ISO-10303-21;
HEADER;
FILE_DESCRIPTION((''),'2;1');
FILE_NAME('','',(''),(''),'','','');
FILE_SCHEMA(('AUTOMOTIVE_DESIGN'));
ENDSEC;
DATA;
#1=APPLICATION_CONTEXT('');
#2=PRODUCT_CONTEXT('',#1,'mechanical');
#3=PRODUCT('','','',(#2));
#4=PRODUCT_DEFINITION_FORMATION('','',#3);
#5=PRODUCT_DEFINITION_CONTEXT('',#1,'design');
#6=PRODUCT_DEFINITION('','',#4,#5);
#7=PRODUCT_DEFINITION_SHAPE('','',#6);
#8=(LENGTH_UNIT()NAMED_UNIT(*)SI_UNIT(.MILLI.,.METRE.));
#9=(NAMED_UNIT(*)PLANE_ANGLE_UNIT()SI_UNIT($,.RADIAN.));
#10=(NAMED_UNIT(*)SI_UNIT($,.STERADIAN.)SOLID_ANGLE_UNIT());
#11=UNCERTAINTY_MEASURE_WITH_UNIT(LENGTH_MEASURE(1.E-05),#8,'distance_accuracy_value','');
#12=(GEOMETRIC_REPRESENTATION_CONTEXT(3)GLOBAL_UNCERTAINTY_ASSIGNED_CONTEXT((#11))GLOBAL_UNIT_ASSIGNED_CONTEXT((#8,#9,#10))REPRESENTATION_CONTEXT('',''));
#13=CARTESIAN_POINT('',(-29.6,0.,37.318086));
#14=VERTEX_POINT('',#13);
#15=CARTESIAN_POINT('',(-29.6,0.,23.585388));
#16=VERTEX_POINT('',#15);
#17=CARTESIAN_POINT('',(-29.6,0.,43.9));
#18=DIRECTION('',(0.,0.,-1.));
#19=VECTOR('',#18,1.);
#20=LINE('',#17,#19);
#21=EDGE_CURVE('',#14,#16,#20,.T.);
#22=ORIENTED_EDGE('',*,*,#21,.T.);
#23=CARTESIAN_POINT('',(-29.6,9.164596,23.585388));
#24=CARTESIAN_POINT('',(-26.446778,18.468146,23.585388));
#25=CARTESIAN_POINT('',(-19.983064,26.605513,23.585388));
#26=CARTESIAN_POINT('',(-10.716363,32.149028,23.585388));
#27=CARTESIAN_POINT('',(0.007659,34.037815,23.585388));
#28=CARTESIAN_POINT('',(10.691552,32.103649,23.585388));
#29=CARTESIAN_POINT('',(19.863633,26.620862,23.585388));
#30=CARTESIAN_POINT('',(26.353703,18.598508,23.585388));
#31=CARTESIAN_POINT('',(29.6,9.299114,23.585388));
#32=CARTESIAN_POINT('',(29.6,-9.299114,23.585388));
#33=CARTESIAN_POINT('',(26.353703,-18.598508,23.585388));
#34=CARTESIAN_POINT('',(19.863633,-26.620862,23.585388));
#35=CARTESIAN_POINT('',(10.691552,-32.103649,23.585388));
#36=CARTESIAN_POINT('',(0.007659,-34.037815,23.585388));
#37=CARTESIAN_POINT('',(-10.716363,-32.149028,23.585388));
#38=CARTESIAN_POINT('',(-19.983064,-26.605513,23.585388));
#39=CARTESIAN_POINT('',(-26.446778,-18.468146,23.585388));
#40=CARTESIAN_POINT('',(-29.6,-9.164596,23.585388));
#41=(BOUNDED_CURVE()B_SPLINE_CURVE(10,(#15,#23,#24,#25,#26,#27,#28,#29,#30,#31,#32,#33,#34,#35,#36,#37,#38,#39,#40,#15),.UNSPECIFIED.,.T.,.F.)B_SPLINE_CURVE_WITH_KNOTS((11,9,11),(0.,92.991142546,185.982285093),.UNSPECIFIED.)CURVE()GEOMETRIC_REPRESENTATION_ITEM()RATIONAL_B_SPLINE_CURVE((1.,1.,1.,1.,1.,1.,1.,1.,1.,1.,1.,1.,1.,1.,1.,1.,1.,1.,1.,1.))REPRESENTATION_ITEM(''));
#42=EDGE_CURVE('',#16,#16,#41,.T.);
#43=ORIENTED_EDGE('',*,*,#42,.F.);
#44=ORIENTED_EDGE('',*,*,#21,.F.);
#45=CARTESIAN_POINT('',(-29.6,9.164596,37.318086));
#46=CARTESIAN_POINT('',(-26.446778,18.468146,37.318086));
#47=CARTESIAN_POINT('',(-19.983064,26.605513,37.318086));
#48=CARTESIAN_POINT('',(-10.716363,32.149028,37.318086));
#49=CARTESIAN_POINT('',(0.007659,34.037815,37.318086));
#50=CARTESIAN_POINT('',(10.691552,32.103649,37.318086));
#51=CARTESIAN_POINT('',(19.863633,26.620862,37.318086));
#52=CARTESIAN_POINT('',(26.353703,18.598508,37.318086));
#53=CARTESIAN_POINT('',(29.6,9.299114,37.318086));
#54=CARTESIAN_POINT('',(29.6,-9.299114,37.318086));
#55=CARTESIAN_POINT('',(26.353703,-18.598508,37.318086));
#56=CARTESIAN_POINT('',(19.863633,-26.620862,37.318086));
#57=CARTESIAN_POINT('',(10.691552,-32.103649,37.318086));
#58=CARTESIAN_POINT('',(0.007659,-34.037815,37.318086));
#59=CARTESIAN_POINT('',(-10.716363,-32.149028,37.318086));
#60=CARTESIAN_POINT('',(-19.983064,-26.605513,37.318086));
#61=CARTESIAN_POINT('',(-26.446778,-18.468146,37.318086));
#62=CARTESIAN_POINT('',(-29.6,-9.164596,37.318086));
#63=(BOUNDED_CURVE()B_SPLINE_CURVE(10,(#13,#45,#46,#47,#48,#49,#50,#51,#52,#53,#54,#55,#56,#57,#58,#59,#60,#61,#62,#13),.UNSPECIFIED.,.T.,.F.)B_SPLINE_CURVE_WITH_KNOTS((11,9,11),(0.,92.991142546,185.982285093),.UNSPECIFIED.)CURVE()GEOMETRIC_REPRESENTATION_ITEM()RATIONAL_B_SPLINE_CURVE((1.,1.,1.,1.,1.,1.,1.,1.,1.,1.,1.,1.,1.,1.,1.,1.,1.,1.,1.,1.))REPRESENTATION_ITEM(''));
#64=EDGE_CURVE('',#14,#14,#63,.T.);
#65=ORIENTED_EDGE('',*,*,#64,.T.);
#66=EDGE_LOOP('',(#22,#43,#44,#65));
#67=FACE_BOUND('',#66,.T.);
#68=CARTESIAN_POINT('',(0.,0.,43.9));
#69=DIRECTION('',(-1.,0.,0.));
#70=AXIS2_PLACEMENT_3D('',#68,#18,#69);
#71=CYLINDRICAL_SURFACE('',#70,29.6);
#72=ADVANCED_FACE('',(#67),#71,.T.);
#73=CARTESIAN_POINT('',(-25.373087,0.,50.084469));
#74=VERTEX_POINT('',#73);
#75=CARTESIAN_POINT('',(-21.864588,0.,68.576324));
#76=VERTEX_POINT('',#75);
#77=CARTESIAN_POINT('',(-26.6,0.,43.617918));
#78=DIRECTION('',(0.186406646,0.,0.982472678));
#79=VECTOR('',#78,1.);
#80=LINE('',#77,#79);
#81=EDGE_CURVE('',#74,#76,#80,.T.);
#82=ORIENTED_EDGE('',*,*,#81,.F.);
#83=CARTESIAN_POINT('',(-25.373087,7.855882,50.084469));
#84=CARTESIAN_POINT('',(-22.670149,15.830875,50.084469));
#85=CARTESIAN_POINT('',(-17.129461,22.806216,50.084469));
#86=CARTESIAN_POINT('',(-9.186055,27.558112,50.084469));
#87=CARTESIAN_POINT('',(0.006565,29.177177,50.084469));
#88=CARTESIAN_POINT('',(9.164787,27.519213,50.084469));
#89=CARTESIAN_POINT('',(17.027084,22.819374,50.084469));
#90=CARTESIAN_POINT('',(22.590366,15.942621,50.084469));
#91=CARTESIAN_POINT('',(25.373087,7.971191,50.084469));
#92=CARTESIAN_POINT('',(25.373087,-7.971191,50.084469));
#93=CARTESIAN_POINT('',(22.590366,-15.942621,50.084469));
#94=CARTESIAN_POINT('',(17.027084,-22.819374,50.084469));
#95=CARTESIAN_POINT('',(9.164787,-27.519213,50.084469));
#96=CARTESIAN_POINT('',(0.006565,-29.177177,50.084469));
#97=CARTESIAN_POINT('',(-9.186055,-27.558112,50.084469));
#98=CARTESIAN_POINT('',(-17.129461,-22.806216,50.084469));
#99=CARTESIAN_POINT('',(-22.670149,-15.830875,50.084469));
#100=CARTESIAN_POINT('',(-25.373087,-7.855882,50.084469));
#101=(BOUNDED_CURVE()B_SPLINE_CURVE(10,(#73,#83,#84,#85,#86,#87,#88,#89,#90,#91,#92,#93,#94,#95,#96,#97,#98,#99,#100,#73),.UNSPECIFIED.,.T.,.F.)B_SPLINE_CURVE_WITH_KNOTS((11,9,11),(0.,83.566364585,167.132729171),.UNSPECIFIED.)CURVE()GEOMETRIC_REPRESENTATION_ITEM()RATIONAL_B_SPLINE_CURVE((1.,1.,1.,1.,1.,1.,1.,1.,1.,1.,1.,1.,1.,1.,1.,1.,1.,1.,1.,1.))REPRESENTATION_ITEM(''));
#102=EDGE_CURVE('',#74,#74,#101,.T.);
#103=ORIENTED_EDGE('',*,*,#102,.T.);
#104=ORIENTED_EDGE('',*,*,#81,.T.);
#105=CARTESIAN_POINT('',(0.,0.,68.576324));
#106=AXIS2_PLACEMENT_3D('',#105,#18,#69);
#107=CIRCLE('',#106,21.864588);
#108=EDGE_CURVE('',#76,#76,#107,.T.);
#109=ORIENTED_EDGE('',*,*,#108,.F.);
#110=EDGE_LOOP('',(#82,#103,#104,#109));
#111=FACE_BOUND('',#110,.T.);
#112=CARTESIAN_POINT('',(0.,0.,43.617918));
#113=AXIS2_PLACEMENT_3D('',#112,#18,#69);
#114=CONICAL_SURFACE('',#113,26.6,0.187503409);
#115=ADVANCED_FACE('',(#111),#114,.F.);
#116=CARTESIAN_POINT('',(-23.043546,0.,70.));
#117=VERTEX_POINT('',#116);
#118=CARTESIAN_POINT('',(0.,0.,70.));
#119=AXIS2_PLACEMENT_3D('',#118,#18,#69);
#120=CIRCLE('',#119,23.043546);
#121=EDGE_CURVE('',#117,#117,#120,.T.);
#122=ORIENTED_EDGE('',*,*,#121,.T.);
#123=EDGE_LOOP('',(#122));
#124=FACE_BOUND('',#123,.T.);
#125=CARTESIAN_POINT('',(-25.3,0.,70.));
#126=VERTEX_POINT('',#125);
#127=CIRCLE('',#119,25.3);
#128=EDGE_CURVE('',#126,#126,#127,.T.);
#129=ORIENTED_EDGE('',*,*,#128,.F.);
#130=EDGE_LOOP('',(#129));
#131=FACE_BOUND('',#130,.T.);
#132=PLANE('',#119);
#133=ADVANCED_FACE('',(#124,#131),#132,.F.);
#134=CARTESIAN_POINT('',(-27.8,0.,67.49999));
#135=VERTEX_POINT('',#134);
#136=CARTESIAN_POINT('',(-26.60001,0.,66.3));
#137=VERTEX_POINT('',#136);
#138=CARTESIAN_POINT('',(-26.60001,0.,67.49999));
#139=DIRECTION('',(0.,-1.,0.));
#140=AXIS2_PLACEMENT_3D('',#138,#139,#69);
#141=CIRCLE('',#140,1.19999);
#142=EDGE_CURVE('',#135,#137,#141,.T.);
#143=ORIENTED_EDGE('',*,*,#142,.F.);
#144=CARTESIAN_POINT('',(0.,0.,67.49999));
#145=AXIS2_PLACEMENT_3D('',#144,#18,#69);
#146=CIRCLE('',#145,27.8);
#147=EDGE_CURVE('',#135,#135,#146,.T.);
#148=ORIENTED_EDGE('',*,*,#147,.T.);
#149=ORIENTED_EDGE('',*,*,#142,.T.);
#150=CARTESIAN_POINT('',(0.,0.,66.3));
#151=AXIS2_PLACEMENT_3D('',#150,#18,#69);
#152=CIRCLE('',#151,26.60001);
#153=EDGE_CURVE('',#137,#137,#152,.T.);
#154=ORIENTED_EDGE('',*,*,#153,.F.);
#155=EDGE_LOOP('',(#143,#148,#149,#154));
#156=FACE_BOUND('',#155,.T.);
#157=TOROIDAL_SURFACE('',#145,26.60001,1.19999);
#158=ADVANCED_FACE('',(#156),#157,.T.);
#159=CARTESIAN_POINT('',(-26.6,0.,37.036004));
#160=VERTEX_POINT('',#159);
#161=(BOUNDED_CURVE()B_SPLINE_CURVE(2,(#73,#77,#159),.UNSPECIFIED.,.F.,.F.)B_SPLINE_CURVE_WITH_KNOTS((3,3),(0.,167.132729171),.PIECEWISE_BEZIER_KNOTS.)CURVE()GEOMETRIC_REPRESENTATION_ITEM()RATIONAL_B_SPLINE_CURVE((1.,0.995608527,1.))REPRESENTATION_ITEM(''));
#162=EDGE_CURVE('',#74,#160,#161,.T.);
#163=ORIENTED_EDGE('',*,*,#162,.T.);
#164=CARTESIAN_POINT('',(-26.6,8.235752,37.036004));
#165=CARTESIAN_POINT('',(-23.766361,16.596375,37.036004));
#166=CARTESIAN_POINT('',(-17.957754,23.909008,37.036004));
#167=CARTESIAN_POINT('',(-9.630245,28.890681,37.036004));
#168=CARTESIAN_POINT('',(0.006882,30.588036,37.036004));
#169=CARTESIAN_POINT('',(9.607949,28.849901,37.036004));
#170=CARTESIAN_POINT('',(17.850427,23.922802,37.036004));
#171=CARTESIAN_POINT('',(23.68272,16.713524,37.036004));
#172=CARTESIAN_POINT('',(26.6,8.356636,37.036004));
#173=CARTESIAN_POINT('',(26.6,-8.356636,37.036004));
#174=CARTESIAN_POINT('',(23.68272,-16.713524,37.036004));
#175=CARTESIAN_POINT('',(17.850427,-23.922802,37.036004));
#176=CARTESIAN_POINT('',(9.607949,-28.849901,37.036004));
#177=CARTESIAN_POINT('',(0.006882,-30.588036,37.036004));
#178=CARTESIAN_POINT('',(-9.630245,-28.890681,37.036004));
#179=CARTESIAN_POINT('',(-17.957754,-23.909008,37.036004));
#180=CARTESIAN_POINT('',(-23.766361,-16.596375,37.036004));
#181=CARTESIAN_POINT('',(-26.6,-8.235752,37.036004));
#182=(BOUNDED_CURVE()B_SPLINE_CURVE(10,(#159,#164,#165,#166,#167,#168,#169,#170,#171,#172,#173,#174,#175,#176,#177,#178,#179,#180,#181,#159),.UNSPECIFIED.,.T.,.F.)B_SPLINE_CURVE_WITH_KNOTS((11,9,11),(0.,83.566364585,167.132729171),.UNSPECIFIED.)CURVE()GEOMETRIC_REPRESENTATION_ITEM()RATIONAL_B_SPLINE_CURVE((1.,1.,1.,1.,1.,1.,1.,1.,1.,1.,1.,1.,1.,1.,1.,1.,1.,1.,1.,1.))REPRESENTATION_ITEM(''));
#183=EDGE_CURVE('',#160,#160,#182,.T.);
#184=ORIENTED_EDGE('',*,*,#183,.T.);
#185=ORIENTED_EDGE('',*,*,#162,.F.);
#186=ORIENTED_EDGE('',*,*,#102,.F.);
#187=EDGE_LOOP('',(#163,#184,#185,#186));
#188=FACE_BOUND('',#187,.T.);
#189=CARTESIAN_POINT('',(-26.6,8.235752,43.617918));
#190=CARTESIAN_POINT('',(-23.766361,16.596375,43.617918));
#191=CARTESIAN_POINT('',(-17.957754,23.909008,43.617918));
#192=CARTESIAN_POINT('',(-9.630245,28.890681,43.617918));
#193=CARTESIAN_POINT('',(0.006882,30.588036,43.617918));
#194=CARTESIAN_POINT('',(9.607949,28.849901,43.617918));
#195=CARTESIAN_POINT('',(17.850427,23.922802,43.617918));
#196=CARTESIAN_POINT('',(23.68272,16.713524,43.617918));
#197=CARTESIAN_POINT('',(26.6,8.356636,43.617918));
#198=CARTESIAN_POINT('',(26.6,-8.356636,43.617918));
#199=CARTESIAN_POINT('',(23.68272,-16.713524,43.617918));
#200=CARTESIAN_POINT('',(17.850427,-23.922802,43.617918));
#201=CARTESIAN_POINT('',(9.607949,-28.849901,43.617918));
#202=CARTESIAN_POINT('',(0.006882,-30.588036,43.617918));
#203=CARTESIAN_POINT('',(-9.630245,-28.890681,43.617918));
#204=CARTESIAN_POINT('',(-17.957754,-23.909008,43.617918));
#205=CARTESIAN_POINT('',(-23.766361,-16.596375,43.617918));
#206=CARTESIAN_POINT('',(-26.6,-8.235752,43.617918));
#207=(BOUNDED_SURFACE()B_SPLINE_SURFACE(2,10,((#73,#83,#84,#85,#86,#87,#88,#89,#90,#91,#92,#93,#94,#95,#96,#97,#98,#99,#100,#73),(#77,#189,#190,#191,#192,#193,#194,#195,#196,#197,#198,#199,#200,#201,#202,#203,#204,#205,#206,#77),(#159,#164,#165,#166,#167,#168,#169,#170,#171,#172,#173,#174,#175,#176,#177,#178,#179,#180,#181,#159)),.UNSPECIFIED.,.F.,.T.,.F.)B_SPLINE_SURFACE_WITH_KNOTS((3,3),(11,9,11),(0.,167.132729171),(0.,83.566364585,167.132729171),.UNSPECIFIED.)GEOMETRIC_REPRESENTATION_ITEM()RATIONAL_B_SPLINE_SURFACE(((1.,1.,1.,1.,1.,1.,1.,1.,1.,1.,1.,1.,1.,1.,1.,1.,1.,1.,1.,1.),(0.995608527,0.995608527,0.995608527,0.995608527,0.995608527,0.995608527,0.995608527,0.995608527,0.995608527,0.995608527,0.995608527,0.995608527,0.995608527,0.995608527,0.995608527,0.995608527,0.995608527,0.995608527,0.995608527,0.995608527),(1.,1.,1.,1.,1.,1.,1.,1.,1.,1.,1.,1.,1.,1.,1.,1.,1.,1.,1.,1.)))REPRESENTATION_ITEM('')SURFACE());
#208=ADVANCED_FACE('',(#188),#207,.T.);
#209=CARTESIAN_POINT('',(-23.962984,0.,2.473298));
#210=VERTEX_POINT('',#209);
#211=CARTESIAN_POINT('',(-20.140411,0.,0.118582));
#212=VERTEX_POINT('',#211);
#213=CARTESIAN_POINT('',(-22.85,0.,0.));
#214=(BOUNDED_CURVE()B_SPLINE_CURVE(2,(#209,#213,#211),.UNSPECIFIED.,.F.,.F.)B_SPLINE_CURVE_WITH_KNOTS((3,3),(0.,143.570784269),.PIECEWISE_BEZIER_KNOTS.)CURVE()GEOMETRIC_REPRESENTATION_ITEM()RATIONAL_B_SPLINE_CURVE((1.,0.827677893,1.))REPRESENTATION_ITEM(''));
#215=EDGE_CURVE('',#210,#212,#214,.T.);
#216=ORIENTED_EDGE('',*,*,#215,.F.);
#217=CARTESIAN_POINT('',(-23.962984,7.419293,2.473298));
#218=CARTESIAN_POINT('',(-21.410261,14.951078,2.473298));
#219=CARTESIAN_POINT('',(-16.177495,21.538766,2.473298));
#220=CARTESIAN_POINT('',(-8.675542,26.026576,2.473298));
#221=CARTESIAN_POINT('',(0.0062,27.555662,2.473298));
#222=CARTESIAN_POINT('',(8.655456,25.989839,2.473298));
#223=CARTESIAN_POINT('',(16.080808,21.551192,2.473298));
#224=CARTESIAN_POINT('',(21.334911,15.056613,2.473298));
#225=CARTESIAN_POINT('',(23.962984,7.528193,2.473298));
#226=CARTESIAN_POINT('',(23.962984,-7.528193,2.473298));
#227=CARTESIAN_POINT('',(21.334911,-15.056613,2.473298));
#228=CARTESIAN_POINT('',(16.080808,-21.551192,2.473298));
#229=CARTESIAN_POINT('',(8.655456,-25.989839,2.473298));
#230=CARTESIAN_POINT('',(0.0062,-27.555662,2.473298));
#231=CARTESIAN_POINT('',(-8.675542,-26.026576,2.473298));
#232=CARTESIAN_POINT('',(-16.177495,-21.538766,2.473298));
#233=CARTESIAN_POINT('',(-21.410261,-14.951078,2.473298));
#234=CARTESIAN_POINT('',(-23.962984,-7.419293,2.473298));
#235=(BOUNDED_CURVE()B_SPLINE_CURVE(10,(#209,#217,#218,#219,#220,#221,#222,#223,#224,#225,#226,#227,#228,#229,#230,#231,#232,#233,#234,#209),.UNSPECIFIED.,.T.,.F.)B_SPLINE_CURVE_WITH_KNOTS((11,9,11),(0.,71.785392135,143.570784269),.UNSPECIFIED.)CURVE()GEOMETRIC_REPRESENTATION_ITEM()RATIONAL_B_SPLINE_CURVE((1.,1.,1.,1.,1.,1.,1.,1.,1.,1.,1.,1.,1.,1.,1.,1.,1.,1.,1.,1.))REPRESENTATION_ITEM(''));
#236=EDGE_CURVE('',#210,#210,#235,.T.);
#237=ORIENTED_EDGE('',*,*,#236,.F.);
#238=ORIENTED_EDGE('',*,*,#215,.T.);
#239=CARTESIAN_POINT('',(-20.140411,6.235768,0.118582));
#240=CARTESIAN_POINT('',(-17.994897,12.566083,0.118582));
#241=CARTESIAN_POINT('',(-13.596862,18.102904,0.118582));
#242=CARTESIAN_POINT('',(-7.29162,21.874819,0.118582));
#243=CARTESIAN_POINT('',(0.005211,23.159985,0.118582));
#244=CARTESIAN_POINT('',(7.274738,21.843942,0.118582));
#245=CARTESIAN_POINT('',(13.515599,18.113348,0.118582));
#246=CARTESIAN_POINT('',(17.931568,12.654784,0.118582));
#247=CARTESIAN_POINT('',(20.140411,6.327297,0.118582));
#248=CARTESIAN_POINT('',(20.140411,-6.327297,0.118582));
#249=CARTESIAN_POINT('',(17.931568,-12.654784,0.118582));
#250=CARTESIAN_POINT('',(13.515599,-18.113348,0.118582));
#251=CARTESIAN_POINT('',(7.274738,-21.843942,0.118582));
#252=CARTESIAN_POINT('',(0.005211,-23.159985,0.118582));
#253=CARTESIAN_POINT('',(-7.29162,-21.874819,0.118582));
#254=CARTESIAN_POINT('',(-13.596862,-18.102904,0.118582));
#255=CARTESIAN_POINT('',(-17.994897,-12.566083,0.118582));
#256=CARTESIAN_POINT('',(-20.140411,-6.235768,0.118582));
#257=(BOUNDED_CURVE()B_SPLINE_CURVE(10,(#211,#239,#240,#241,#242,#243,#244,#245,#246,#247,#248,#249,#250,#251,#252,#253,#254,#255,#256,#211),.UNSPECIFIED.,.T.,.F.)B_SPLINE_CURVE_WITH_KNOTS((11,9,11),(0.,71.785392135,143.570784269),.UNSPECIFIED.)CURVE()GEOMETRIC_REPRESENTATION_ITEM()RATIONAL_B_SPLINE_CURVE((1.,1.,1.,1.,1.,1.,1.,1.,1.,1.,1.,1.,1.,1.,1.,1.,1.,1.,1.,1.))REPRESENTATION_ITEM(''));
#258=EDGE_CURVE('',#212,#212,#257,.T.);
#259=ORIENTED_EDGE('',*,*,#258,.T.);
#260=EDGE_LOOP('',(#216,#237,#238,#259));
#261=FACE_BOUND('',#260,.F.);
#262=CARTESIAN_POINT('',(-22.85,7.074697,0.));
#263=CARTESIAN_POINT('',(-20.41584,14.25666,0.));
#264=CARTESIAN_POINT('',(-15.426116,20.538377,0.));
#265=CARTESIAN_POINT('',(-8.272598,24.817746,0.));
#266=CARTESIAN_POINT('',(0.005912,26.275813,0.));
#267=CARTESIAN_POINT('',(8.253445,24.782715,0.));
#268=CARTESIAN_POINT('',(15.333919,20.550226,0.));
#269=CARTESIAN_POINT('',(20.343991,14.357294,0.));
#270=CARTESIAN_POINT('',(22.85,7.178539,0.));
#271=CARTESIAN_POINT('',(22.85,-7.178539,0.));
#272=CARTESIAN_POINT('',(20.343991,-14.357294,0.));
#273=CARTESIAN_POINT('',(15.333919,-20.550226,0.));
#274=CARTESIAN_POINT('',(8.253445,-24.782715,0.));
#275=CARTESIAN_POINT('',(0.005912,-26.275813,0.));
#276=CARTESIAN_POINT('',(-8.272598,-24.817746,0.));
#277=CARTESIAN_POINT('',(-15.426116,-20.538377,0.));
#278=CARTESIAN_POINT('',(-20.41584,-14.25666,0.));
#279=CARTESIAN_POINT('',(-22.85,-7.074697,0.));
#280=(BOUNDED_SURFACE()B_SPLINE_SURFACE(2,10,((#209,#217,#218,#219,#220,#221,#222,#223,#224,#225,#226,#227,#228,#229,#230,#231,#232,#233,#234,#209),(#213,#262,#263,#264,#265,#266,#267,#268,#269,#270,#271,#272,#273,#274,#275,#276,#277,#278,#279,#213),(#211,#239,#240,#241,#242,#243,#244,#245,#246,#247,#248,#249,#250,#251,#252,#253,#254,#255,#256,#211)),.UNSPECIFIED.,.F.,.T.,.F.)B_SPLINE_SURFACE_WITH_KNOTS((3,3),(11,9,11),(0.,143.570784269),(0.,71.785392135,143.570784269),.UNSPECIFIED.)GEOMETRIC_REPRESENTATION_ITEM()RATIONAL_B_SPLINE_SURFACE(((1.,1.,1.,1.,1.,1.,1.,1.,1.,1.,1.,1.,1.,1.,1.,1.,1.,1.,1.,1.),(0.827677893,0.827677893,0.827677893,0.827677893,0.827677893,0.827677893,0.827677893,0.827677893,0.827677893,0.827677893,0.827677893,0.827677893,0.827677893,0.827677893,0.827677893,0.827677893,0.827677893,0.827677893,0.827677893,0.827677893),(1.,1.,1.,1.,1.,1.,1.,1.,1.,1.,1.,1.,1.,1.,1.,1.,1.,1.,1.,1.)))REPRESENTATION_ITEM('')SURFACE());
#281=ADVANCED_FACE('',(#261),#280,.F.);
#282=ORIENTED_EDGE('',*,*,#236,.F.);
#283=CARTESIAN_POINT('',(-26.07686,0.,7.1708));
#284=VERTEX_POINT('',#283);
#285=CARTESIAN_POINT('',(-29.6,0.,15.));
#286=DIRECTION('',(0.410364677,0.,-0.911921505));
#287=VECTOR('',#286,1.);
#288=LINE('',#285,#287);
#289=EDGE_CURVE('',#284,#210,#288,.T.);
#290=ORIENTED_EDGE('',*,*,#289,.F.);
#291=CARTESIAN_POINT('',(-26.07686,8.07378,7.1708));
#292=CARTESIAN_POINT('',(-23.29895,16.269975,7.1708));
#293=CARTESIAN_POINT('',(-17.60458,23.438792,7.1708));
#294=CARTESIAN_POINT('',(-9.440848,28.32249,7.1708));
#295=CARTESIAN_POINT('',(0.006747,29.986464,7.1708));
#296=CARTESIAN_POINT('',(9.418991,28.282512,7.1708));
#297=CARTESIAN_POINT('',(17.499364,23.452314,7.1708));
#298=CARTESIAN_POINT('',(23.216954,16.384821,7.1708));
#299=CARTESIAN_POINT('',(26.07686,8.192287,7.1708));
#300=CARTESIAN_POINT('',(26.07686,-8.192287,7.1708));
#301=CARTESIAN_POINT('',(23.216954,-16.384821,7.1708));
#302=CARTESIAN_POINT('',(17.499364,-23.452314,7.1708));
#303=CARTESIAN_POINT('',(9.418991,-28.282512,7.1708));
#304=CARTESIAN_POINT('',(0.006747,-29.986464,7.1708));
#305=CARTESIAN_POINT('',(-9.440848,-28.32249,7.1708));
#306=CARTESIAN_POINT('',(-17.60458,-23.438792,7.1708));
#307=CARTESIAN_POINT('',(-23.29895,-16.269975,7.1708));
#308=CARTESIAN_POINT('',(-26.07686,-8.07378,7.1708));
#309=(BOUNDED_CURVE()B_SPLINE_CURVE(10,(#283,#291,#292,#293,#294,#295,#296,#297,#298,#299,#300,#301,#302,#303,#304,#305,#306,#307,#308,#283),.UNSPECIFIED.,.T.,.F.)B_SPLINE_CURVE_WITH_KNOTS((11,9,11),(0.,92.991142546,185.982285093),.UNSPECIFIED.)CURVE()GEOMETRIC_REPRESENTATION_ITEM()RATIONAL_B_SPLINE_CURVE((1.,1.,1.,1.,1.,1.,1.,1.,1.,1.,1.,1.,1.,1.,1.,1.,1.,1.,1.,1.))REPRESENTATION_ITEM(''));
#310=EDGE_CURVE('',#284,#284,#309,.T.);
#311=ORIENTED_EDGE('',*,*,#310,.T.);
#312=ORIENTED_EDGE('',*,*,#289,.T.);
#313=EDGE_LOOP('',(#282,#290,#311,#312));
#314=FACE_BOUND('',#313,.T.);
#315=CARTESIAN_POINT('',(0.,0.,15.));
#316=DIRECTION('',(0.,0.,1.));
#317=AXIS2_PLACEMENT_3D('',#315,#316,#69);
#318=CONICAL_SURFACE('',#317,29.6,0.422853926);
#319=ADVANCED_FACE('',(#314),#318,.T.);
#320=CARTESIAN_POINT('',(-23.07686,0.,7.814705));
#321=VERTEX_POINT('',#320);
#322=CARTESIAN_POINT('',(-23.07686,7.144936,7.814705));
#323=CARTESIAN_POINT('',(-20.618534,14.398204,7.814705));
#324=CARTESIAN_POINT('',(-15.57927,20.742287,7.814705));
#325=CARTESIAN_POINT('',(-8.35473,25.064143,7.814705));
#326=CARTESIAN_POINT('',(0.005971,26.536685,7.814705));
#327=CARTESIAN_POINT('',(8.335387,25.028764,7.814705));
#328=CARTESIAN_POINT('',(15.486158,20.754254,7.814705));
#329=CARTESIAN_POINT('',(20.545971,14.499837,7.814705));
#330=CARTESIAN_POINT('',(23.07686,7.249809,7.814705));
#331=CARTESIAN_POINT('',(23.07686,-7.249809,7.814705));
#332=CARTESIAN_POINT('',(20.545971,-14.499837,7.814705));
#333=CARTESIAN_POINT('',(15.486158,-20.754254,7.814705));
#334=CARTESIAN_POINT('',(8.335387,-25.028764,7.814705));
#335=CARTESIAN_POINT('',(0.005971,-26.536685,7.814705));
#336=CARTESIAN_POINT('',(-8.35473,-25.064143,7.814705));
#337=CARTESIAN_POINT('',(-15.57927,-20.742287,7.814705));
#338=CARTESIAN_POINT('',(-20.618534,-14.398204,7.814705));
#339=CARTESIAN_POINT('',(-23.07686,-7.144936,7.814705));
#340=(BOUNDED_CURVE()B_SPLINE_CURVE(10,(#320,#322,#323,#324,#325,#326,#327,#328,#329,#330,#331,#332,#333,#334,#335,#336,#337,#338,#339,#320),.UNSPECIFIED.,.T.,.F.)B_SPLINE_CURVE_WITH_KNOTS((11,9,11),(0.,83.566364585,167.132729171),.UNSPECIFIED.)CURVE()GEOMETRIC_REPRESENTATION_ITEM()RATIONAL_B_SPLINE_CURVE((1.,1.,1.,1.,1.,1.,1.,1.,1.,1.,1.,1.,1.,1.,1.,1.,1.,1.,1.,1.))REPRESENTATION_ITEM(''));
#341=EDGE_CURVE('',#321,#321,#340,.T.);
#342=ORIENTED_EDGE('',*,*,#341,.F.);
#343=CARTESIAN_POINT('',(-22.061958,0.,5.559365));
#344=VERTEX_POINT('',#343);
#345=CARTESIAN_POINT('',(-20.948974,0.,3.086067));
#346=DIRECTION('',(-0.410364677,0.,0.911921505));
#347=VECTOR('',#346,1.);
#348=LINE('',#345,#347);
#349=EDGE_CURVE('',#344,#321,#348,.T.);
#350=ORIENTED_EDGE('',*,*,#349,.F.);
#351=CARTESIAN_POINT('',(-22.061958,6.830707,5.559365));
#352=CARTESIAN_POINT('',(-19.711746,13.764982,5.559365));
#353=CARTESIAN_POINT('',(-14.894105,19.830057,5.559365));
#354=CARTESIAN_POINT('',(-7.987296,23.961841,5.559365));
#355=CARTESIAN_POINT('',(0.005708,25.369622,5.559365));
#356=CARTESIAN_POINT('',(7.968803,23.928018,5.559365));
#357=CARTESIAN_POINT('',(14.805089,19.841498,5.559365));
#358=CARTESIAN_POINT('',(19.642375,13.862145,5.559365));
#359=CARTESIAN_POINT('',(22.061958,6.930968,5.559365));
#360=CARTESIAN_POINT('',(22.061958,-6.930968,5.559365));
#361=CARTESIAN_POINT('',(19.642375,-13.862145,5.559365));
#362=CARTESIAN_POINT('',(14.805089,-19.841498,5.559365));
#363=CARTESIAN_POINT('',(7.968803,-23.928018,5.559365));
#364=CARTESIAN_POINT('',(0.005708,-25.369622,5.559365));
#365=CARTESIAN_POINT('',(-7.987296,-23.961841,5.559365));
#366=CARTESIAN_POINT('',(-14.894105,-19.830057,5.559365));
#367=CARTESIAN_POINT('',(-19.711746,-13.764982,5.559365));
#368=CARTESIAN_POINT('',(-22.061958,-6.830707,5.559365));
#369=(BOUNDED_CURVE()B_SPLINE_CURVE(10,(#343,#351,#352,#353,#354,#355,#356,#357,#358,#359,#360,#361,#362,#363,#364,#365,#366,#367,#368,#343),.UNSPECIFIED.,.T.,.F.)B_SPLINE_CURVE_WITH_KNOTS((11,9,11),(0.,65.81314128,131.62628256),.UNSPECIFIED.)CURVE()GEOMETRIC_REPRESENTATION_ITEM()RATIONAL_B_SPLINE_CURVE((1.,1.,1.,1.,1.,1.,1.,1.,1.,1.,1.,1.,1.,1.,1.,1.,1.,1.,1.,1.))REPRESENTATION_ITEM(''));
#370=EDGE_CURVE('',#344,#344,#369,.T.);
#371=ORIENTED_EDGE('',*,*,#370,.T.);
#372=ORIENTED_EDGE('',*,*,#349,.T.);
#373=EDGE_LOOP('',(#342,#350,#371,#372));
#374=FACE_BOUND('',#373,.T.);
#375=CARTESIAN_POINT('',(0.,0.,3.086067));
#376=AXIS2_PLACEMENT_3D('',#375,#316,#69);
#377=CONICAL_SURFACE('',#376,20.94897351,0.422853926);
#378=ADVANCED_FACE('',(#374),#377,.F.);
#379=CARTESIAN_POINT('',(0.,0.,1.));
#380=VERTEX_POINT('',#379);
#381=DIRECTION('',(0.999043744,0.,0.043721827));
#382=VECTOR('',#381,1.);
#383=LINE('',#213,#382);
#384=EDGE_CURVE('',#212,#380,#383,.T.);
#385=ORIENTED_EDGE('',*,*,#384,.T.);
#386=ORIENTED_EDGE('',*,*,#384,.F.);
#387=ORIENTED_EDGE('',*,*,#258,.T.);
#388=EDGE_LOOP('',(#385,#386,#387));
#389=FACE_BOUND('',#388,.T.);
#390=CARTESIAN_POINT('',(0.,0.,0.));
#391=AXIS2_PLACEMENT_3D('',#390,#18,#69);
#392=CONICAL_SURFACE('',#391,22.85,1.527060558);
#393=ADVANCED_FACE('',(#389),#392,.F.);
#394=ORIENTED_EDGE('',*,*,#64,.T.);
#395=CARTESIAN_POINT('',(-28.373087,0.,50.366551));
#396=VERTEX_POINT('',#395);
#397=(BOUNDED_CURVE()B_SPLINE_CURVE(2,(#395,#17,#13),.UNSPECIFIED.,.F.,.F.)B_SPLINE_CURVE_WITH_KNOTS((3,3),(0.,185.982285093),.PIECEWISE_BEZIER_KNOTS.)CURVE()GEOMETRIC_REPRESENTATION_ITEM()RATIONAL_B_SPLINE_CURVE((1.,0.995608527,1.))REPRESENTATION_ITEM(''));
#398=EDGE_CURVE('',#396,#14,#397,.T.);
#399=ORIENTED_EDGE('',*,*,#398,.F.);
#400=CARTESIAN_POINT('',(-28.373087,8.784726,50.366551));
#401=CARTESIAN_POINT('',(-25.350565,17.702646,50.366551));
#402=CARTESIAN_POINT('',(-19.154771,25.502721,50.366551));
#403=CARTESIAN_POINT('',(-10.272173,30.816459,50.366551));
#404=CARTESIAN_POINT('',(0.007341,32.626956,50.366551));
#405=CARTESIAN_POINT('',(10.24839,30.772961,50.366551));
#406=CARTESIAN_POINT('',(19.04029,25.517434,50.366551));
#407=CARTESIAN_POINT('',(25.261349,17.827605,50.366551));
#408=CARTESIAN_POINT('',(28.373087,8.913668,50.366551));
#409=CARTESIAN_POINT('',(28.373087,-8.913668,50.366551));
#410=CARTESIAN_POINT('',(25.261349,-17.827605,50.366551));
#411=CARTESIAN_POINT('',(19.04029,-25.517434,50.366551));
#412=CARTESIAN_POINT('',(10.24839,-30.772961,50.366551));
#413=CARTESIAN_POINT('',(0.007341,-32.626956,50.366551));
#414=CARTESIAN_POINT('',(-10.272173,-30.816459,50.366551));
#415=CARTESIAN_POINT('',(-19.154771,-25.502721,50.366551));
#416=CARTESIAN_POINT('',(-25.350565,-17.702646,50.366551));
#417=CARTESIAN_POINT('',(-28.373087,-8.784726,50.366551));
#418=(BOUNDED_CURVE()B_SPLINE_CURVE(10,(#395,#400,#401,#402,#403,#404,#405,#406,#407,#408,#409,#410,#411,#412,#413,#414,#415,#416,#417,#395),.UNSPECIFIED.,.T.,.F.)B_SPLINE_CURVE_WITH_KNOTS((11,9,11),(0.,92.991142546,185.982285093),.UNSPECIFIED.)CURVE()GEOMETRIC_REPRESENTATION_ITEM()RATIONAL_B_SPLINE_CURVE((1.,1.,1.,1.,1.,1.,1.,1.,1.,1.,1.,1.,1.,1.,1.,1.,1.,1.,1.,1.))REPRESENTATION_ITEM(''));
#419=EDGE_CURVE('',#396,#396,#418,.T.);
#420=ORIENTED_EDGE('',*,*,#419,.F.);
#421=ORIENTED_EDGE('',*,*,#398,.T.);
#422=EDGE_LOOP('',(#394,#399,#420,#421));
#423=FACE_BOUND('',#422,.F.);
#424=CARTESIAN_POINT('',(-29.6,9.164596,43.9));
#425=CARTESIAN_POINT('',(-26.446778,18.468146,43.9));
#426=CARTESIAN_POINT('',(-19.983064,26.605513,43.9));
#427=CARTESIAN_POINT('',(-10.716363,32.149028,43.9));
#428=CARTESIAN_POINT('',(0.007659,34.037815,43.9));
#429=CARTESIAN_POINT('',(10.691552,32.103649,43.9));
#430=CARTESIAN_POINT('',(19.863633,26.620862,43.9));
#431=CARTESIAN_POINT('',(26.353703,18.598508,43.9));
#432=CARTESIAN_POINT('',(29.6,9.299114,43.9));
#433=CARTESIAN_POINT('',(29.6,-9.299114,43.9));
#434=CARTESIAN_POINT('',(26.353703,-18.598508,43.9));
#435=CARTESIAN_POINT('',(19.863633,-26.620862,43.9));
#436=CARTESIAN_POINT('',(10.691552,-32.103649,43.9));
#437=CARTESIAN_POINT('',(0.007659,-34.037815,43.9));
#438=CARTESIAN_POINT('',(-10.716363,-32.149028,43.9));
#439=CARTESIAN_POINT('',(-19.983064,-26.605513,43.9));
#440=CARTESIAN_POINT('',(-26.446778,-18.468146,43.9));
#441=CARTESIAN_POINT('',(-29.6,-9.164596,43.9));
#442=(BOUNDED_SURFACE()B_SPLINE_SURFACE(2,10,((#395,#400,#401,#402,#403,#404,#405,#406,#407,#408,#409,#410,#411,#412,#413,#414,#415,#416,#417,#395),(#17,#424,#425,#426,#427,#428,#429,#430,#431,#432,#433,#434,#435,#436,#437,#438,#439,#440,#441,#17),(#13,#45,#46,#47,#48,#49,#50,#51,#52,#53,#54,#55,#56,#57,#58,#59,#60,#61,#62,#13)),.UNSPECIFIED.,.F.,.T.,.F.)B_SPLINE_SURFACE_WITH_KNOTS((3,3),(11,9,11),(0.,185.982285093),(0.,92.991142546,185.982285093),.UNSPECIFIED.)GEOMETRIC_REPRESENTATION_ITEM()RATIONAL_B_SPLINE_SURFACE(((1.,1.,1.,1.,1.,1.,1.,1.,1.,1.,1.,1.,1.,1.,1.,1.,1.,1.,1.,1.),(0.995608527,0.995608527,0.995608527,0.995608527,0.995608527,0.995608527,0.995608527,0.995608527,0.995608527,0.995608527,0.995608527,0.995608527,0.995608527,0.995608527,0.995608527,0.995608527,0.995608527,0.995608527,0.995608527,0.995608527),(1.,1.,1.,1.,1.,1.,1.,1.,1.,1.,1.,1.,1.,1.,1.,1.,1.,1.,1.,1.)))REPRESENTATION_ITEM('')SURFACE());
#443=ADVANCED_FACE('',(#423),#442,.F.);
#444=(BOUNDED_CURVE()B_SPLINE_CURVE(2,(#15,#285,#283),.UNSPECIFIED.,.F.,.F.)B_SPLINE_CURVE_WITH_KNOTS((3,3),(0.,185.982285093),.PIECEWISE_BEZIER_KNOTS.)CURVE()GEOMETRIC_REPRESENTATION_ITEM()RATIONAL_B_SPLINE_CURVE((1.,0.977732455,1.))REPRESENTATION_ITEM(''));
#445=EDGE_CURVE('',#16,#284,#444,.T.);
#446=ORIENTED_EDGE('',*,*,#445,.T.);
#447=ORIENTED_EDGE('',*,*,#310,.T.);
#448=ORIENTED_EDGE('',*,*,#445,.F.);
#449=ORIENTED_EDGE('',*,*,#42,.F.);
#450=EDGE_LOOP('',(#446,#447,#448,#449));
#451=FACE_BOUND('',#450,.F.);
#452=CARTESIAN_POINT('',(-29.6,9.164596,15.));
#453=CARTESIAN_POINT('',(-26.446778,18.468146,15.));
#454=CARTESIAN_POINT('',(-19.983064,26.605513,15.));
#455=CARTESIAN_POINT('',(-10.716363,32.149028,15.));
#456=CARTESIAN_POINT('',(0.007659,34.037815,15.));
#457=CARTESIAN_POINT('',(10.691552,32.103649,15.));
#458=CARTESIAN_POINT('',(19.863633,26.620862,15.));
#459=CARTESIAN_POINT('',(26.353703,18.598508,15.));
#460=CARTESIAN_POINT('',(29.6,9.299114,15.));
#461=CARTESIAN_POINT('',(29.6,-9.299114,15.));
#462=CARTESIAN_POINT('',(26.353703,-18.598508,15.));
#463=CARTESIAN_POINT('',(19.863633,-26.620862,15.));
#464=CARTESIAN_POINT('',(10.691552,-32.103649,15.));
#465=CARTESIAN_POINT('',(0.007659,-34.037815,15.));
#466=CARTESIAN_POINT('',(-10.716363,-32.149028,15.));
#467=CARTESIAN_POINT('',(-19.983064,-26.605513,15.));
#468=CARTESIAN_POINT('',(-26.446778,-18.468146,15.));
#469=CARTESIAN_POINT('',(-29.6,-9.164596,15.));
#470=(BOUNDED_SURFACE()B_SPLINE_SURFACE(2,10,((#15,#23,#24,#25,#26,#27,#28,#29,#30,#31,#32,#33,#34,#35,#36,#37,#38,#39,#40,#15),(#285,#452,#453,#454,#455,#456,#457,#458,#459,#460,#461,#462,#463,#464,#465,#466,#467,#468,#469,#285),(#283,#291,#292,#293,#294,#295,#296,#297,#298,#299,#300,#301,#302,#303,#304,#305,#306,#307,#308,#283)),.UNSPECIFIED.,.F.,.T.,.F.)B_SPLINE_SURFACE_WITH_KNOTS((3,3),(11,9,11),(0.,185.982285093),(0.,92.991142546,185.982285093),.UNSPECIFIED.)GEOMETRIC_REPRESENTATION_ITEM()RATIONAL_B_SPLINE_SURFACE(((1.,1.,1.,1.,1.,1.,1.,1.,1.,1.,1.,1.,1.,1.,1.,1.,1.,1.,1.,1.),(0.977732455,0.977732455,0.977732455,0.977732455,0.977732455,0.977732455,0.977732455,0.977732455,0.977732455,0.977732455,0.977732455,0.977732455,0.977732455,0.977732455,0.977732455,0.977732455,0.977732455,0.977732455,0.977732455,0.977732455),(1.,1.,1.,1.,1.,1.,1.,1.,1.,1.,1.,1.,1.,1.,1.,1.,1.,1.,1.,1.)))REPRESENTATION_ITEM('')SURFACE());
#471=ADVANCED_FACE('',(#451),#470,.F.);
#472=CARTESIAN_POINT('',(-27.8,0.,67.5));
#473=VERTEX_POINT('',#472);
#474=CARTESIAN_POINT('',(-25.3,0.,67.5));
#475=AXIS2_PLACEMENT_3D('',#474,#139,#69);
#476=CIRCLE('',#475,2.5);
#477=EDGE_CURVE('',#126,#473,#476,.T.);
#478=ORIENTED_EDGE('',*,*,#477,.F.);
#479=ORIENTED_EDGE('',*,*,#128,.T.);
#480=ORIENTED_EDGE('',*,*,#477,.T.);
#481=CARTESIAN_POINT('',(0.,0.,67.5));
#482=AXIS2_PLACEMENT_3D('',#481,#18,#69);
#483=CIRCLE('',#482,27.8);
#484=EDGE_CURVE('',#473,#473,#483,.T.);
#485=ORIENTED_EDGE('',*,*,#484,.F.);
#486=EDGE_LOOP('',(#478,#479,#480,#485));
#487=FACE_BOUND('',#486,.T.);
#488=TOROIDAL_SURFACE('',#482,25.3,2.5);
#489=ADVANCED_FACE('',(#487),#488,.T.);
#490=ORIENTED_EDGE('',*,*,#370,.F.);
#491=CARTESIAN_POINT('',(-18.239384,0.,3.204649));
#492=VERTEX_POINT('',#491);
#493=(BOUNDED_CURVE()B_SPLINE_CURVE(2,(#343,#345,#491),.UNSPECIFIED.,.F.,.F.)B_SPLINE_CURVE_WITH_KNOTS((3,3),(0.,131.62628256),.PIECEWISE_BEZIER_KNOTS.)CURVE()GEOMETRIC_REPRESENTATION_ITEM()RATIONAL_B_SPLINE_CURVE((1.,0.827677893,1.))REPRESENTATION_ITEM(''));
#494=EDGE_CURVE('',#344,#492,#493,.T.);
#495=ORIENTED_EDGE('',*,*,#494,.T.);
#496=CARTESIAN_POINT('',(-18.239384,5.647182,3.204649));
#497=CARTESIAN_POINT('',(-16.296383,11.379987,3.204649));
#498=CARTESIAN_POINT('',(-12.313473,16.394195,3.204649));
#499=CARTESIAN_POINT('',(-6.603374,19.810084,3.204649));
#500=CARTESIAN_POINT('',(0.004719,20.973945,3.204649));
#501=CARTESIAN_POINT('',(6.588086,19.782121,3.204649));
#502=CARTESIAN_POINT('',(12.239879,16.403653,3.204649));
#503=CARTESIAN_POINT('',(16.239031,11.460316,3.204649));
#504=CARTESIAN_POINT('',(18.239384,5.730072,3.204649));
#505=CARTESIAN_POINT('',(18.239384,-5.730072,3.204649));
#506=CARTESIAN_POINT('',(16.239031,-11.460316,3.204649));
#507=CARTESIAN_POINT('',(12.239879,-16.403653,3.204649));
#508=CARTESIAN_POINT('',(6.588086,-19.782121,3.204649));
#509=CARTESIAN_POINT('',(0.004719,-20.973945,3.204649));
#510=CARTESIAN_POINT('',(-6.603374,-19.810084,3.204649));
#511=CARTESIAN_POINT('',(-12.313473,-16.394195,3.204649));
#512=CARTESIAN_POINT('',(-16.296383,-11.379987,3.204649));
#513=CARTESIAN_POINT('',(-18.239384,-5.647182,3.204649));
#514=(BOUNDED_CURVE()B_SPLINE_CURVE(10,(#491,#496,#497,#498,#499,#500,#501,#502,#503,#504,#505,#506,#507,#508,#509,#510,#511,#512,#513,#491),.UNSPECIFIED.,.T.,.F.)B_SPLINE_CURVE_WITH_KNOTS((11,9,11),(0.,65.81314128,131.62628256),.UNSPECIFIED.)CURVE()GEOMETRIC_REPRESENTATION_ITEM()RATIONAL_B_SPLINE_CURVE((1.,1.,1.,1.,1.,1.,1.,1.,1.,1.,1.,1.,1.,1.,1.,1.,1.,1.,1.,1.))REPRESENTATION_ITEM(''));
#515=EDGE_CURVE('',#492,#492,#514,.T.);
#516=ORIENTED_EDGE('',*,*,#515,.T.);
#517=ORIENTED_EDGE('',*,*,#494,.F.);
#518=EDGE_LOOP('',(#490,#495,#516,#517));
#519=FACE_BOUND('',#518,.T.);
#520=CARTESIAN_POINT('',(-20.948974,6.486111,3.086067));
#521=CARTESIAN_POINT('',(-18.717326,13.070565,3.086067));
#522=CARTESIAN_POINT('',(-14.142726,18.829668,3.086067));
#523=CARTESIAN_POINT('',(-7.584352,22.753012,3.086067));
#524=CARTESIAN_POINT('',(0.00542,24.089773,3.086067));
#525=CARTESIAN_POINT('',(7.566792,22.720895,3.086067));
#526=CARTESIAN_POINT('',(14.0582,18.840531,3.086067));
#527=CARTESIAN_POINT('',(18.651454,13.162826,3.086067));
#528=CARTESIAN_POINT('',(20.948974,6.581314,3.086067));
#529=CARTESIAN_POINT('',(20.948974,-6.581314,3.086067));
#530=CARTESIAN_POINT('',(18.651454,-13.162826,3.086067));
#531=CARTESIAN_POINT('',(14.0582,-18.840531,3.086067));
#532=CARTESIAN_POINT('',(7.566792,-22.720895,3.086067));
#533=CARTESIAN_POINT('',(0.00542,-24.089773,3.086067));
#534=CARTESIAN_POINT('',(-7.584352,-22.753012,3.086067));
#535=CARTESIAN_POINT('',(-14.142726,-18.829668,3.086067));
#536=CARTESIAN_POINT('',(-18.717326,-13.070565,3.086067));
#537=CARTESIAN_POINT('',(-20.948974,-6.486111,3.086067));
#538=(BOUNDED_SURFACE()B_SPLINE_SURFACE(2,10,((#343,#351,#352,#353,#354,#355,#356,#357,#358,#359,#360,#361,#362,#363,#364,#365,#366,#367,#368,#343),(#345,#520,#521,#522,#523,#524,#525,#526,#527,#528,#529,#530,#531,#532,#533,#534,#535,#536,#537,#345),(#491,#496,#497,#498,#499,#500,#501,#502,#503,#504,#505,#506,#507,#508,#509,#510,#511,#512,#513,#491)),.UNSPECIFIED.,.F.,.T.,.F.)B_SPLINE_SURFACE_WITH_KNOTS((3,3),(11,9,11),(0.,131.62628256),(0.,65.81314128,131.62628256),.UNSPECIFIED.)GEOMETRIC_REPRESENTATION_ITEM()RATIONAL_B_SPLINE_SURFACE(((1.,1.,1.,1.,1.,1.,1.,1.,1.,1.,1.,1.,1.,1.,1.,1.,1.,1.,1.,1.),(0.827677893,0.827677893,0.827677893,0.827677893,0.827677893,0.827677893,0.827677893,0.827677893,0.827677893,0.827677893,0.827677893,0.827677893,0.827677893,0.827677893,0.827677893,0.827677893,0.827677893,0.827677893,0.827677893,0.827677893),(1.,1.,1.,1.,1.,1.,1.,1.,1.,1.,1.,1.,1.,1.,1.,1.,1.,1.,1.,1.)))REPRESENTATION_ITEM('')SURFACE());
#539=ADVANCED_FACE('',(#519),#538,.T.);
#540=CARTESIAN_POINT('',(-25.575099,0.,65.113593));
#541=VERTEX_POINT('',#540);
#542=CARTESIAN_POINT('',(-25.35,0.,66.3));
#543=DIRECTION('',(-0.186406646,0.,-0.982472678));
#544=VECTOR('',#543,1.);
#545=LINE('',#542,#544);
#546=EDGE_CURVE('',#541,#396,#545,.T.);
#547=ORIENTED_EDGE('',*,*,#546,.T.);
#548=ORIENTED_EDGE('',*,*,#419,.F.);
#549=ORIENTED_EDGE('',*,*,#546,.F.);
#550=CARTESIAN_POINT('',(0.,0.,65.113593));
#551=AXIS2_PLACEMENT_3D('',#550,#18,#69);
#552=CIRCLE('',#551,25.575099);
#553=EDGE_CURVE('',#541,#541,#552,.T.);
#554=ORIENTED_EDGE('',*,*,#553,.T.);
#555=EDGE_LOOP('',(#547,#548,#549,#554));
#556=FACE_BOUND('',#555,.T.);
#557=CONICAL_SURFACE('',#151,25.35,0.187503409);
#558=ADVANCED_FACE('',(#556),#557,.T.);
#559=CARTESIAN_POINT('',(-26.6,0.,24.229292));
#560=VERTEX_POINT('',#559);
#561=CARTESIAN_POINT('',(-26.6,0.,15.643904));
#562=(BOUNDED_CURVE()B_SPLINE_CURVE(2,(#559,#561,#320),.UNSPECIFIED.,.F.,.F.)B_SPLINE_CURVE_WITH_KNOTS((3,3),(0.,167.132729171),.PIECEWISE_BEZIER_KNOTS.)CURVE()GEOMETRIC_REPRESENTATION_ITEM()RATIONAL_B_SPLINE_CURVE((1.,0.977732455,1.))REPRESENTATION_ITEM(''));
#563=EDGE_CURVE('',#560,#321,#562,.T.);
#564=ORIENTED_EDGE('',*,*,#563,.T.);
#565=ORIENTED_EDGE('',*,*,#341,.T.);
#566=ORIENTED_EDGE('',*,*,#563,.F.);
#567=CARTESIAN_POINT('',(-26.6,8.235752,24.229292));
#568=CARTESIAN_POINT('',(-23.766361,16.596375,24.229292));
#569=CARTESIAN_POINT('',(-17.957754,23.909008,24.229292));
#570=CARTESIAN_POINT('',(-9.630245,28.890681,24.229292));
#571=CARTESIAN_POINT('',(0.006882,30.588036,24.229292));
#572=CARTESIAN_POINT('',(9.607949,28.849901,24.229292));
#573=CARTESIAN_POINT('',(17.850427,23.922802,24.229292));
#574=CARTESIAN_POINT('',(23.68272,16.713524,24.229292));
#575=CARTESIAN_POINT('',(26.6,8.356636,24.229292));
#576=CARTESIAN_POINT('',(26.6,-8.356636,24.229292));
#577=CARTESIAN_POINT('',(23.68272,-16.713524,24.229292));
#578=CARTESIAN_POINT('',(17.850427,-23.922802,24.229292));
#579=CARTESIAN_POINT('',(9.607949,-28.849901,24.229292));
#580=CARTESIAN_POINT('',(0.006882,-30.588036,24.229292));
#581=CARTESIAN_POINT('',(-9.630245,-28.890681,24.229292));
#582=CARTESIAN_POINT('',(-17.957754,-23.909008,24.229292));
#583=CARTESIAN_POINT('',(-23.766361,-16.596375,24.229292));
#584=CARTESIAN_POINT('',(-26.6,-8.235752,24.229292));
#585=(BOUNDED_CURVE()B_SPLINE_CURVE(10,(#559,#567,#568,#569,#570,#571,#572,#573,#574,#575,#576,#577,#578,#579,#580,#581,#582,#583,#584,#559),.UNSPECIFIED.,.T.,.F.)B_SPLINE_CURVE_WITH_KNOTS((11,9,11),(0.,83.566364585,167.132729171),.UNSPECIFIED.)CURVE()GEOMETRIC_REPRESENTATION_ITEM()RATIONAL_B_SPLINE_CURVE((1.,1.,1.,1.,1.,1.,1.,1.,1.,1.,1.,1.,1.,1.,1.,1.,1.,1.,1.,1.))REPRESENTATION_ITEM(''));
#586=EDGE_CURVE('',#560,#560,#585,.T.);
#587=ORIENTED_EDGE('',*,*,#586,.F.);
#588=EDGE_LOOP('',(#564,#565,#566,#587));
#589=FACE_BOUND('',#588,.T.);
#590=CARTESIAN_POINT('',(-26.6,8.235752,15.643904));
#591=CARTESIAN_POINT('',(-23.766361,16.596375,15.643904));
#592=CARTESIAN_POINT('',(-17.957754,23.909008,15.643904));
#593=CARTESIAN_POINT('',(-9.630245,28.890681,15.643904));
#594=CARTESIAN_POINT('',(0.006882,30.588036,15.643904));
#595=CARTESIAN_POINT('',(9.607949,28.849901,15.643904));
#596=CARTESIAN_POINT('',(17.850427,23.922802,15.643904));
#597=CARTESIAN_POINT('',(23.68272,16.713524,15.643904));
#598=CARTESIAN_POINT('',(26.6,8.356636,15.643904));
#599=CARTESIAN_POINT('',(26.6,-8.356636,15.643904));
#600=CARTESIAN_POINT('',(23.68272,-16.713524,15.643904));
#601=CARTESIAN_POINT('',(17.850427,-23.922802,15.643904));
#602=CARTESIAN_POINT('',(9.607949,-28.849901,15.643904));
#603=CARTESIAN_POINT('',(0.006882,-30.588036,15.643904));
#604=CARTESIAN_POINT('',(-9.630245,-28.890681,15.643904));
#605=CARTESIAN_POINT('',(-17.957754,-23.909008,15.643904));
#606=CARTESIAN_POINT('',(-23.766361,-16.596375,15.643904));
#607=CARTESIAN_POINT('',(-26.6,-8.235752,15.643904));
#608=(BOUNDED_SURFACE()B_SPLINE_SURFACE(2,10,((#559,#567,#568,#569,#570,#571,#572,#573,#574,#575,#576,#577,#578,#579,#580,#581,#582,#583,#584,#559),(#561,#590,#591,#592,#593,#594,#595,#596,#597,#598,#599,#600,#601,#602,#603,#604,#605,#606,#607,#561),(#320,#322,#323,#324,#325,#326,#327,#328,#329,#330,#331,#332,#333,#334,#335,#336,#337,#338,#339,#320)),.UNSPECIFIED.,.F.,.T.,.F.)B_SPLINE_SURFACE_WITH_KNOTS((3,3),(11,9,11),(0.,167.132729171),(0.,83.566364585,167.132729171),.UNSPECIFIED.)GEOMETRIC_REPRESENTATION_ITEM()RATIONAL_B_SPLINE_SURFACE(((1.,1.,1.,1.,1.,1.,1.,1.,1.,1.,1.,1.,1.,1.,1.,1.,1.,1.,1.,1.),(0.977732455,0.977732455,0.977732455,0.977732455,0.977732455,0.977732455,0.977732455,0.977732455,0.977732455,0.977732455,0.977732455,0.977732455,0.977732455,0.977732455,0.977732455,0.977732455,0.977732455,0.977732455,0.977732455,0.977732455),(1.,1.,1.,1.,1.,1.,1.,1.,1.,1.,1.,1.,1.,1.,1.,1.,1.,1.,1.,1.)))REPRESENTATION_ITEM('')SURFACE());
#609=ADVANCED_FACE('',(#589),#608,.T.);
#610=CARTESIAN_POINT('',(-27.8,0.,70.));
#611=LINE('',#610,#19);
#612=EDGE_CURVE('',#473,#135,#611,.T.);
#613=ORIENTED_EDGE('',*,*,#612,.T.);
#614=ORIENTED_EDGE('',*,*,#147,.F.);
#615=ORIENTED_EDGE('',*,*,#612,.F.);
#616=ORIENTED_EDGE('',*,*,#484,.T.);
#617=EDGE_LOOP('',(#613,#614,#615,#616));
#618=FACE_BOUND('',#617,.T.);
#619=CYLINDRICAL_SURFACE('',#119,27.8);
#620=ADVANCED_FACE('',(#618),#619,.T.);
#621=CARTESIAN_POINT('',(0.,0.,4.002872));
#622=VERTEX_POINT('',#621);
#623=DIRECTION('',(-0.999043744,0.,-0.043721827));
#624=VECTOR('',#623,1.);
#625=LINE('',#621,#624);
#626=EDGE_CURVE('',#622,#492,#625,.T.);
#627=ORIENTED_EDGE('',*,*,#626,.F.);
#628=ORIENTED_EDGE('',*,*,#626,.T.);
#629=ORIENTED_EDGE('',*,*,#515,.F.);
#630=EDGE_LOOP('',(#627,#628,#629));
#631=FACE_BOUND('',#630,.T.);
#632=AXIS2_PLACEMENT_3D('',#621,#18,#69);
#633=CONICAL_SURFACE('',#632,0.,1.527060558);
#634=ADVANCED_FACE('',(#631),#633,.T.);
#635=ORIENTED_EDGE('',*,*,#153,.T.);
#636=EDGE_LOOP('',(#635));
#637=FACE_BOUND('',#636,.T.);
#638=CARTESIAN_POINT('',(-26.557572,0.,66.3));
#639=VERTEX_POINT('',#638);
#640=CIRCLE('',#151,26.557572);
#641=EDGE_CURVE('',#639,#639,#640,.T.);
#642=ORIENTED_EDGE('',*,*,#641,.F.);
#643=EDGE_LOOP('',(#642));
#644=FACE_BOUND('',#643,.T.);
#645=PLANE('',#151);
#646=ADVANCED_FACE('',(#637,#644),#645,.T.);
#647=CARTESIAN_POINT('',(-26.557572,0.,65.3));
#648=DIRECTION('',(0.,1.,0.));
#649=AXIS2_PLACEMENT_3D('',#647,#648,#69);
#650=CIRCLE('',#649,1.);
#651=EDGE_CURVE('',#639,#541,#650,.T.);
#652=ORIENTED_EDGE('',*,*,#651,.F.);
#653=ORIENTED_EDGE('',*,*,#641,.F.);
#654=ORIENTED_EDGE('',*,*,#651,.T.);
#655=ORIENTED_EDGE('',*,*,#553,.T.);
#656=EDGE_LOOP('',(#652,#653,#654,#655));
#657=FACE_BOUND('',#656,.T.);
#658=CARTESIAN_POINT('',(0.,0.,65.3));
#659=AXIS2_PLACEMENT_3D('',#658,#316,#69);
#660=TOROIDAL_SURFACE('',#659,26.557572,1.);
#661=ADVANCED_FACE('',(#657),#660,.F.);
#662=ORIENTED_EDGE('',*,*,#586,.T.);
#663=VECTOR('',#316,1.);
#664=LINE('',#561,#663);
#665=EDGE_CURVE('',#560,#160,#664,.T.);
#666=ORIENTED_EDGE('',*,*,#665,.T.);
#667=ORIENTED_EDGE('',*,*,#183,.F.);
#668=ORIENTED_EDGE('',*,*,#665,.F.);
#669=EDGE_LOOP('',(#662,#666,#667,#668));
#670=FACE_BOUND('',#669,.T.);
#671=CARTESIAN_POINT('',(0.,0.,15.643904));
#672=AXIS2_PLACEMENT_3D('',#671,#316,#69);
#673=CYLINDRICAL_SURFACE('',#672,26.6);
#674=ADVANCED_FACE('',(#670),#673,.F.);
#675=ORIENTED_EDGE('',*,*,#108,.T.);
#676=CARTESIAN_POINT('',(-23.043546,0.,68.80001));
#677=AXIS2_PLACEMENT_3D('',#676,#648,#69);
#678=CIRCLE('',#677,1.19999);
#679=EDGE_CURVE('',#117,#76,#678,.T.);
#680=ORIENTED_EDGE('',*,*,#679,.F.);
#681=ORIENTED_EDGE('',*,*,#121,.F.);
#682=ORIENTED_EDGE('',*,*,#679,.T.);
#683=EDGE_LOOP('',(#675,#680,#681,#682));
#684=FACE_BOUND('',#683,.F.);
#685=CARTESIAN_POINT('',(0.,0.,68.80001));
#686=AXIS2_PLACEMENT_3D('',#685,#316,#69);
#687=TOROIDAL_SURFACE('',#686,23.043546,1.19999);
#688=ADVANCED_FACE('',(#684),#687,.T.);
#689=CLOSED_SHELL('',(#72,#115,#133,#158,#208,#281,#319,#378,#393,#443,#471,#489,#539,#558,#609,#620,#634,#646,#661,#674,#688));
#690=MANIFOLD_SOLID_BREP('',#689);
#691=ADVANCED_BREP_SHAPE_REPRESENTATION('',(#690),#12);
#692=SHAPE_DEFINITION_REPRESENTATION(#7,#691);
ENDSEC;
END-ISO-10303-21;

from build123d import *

# Parameters (mm, degrees)
F2_R = 2.5
F3_R = 1.19999
F4_R = 1
F5_R = 70
F6_R = 40
F7_R = 4


# Not quite as in the source:
# - a fillet or chamfer is up to 0.001 mm smaller than in the source, because OpenCascade refuses the exact size


with BuildPart() as f1:
    # F0 (on Front) → F1 (revolve)
    with BuildSketch(Plane.XZ):
        Polygon((-21.5944710413, 70), (-27.8, 70), (-27.8, 66.3), (-25.35, 66.3), (-29.6, 43.9), (-29.6, 15), (-22.85, 0), (0, 1), (0, 4.0028715148), (-20.9489735102, 3.0860674224), (-26.6, 15.6439040665), (-26.6, 43.6179179589), align=None)
    revolve(axis=Axis((0, 0, 35.5), (0, 0, -1)))

    # F2
    f2_edges = [f1.edges().sort_by_distance(p)[0] for p in [
        (27.8, 0, 70),
    ]]
    fillet(f2_edges, radius=F2_R)

    # F3 (radius 1.2 in the source; OpenCascade refuses exactly that, so slightly less here)
    f3_edges = [f1.edges().sort_by_distance(p)[0] for p in [
        (27.8, 0, 66.3),
        (21.594471, 0, 70),
    ]]
    fillet(f3_edges, radius=F3_R)

    # F4
    f4_edges = [f1.edges().sort_by_distance(p)[0] for p in [
        (25.35, 0, 66.3),
    ]]
    fillet(f4_edges, radius=F4_R)

    # F5
    f5_edges = [f1.edges().sort_by_distance(p)[0] for p in [
        (29.6, 0, 43.9),
        (26.6, 0, 43.617918),
    ]]
    fillet(f5_edges, radius=F5_R)

    # F6
    f6_edges = [f1.edges().sort_by_distance(p)[0] for p in [
        (29.6, 0, 15),
        (26.6, 0, 15.643904),
    ]]
    fillet(f6_edges, radius=F6_R)

    # F7
    f7_edges = [f1.edges().sort_by_distance(p)[0] for p in [
        (20.948974, 0, 3.086067),
        (22.85, 0, 0),
    ]]
    fillet(f7_edges, radius=F7_R)


solid = f1.part
